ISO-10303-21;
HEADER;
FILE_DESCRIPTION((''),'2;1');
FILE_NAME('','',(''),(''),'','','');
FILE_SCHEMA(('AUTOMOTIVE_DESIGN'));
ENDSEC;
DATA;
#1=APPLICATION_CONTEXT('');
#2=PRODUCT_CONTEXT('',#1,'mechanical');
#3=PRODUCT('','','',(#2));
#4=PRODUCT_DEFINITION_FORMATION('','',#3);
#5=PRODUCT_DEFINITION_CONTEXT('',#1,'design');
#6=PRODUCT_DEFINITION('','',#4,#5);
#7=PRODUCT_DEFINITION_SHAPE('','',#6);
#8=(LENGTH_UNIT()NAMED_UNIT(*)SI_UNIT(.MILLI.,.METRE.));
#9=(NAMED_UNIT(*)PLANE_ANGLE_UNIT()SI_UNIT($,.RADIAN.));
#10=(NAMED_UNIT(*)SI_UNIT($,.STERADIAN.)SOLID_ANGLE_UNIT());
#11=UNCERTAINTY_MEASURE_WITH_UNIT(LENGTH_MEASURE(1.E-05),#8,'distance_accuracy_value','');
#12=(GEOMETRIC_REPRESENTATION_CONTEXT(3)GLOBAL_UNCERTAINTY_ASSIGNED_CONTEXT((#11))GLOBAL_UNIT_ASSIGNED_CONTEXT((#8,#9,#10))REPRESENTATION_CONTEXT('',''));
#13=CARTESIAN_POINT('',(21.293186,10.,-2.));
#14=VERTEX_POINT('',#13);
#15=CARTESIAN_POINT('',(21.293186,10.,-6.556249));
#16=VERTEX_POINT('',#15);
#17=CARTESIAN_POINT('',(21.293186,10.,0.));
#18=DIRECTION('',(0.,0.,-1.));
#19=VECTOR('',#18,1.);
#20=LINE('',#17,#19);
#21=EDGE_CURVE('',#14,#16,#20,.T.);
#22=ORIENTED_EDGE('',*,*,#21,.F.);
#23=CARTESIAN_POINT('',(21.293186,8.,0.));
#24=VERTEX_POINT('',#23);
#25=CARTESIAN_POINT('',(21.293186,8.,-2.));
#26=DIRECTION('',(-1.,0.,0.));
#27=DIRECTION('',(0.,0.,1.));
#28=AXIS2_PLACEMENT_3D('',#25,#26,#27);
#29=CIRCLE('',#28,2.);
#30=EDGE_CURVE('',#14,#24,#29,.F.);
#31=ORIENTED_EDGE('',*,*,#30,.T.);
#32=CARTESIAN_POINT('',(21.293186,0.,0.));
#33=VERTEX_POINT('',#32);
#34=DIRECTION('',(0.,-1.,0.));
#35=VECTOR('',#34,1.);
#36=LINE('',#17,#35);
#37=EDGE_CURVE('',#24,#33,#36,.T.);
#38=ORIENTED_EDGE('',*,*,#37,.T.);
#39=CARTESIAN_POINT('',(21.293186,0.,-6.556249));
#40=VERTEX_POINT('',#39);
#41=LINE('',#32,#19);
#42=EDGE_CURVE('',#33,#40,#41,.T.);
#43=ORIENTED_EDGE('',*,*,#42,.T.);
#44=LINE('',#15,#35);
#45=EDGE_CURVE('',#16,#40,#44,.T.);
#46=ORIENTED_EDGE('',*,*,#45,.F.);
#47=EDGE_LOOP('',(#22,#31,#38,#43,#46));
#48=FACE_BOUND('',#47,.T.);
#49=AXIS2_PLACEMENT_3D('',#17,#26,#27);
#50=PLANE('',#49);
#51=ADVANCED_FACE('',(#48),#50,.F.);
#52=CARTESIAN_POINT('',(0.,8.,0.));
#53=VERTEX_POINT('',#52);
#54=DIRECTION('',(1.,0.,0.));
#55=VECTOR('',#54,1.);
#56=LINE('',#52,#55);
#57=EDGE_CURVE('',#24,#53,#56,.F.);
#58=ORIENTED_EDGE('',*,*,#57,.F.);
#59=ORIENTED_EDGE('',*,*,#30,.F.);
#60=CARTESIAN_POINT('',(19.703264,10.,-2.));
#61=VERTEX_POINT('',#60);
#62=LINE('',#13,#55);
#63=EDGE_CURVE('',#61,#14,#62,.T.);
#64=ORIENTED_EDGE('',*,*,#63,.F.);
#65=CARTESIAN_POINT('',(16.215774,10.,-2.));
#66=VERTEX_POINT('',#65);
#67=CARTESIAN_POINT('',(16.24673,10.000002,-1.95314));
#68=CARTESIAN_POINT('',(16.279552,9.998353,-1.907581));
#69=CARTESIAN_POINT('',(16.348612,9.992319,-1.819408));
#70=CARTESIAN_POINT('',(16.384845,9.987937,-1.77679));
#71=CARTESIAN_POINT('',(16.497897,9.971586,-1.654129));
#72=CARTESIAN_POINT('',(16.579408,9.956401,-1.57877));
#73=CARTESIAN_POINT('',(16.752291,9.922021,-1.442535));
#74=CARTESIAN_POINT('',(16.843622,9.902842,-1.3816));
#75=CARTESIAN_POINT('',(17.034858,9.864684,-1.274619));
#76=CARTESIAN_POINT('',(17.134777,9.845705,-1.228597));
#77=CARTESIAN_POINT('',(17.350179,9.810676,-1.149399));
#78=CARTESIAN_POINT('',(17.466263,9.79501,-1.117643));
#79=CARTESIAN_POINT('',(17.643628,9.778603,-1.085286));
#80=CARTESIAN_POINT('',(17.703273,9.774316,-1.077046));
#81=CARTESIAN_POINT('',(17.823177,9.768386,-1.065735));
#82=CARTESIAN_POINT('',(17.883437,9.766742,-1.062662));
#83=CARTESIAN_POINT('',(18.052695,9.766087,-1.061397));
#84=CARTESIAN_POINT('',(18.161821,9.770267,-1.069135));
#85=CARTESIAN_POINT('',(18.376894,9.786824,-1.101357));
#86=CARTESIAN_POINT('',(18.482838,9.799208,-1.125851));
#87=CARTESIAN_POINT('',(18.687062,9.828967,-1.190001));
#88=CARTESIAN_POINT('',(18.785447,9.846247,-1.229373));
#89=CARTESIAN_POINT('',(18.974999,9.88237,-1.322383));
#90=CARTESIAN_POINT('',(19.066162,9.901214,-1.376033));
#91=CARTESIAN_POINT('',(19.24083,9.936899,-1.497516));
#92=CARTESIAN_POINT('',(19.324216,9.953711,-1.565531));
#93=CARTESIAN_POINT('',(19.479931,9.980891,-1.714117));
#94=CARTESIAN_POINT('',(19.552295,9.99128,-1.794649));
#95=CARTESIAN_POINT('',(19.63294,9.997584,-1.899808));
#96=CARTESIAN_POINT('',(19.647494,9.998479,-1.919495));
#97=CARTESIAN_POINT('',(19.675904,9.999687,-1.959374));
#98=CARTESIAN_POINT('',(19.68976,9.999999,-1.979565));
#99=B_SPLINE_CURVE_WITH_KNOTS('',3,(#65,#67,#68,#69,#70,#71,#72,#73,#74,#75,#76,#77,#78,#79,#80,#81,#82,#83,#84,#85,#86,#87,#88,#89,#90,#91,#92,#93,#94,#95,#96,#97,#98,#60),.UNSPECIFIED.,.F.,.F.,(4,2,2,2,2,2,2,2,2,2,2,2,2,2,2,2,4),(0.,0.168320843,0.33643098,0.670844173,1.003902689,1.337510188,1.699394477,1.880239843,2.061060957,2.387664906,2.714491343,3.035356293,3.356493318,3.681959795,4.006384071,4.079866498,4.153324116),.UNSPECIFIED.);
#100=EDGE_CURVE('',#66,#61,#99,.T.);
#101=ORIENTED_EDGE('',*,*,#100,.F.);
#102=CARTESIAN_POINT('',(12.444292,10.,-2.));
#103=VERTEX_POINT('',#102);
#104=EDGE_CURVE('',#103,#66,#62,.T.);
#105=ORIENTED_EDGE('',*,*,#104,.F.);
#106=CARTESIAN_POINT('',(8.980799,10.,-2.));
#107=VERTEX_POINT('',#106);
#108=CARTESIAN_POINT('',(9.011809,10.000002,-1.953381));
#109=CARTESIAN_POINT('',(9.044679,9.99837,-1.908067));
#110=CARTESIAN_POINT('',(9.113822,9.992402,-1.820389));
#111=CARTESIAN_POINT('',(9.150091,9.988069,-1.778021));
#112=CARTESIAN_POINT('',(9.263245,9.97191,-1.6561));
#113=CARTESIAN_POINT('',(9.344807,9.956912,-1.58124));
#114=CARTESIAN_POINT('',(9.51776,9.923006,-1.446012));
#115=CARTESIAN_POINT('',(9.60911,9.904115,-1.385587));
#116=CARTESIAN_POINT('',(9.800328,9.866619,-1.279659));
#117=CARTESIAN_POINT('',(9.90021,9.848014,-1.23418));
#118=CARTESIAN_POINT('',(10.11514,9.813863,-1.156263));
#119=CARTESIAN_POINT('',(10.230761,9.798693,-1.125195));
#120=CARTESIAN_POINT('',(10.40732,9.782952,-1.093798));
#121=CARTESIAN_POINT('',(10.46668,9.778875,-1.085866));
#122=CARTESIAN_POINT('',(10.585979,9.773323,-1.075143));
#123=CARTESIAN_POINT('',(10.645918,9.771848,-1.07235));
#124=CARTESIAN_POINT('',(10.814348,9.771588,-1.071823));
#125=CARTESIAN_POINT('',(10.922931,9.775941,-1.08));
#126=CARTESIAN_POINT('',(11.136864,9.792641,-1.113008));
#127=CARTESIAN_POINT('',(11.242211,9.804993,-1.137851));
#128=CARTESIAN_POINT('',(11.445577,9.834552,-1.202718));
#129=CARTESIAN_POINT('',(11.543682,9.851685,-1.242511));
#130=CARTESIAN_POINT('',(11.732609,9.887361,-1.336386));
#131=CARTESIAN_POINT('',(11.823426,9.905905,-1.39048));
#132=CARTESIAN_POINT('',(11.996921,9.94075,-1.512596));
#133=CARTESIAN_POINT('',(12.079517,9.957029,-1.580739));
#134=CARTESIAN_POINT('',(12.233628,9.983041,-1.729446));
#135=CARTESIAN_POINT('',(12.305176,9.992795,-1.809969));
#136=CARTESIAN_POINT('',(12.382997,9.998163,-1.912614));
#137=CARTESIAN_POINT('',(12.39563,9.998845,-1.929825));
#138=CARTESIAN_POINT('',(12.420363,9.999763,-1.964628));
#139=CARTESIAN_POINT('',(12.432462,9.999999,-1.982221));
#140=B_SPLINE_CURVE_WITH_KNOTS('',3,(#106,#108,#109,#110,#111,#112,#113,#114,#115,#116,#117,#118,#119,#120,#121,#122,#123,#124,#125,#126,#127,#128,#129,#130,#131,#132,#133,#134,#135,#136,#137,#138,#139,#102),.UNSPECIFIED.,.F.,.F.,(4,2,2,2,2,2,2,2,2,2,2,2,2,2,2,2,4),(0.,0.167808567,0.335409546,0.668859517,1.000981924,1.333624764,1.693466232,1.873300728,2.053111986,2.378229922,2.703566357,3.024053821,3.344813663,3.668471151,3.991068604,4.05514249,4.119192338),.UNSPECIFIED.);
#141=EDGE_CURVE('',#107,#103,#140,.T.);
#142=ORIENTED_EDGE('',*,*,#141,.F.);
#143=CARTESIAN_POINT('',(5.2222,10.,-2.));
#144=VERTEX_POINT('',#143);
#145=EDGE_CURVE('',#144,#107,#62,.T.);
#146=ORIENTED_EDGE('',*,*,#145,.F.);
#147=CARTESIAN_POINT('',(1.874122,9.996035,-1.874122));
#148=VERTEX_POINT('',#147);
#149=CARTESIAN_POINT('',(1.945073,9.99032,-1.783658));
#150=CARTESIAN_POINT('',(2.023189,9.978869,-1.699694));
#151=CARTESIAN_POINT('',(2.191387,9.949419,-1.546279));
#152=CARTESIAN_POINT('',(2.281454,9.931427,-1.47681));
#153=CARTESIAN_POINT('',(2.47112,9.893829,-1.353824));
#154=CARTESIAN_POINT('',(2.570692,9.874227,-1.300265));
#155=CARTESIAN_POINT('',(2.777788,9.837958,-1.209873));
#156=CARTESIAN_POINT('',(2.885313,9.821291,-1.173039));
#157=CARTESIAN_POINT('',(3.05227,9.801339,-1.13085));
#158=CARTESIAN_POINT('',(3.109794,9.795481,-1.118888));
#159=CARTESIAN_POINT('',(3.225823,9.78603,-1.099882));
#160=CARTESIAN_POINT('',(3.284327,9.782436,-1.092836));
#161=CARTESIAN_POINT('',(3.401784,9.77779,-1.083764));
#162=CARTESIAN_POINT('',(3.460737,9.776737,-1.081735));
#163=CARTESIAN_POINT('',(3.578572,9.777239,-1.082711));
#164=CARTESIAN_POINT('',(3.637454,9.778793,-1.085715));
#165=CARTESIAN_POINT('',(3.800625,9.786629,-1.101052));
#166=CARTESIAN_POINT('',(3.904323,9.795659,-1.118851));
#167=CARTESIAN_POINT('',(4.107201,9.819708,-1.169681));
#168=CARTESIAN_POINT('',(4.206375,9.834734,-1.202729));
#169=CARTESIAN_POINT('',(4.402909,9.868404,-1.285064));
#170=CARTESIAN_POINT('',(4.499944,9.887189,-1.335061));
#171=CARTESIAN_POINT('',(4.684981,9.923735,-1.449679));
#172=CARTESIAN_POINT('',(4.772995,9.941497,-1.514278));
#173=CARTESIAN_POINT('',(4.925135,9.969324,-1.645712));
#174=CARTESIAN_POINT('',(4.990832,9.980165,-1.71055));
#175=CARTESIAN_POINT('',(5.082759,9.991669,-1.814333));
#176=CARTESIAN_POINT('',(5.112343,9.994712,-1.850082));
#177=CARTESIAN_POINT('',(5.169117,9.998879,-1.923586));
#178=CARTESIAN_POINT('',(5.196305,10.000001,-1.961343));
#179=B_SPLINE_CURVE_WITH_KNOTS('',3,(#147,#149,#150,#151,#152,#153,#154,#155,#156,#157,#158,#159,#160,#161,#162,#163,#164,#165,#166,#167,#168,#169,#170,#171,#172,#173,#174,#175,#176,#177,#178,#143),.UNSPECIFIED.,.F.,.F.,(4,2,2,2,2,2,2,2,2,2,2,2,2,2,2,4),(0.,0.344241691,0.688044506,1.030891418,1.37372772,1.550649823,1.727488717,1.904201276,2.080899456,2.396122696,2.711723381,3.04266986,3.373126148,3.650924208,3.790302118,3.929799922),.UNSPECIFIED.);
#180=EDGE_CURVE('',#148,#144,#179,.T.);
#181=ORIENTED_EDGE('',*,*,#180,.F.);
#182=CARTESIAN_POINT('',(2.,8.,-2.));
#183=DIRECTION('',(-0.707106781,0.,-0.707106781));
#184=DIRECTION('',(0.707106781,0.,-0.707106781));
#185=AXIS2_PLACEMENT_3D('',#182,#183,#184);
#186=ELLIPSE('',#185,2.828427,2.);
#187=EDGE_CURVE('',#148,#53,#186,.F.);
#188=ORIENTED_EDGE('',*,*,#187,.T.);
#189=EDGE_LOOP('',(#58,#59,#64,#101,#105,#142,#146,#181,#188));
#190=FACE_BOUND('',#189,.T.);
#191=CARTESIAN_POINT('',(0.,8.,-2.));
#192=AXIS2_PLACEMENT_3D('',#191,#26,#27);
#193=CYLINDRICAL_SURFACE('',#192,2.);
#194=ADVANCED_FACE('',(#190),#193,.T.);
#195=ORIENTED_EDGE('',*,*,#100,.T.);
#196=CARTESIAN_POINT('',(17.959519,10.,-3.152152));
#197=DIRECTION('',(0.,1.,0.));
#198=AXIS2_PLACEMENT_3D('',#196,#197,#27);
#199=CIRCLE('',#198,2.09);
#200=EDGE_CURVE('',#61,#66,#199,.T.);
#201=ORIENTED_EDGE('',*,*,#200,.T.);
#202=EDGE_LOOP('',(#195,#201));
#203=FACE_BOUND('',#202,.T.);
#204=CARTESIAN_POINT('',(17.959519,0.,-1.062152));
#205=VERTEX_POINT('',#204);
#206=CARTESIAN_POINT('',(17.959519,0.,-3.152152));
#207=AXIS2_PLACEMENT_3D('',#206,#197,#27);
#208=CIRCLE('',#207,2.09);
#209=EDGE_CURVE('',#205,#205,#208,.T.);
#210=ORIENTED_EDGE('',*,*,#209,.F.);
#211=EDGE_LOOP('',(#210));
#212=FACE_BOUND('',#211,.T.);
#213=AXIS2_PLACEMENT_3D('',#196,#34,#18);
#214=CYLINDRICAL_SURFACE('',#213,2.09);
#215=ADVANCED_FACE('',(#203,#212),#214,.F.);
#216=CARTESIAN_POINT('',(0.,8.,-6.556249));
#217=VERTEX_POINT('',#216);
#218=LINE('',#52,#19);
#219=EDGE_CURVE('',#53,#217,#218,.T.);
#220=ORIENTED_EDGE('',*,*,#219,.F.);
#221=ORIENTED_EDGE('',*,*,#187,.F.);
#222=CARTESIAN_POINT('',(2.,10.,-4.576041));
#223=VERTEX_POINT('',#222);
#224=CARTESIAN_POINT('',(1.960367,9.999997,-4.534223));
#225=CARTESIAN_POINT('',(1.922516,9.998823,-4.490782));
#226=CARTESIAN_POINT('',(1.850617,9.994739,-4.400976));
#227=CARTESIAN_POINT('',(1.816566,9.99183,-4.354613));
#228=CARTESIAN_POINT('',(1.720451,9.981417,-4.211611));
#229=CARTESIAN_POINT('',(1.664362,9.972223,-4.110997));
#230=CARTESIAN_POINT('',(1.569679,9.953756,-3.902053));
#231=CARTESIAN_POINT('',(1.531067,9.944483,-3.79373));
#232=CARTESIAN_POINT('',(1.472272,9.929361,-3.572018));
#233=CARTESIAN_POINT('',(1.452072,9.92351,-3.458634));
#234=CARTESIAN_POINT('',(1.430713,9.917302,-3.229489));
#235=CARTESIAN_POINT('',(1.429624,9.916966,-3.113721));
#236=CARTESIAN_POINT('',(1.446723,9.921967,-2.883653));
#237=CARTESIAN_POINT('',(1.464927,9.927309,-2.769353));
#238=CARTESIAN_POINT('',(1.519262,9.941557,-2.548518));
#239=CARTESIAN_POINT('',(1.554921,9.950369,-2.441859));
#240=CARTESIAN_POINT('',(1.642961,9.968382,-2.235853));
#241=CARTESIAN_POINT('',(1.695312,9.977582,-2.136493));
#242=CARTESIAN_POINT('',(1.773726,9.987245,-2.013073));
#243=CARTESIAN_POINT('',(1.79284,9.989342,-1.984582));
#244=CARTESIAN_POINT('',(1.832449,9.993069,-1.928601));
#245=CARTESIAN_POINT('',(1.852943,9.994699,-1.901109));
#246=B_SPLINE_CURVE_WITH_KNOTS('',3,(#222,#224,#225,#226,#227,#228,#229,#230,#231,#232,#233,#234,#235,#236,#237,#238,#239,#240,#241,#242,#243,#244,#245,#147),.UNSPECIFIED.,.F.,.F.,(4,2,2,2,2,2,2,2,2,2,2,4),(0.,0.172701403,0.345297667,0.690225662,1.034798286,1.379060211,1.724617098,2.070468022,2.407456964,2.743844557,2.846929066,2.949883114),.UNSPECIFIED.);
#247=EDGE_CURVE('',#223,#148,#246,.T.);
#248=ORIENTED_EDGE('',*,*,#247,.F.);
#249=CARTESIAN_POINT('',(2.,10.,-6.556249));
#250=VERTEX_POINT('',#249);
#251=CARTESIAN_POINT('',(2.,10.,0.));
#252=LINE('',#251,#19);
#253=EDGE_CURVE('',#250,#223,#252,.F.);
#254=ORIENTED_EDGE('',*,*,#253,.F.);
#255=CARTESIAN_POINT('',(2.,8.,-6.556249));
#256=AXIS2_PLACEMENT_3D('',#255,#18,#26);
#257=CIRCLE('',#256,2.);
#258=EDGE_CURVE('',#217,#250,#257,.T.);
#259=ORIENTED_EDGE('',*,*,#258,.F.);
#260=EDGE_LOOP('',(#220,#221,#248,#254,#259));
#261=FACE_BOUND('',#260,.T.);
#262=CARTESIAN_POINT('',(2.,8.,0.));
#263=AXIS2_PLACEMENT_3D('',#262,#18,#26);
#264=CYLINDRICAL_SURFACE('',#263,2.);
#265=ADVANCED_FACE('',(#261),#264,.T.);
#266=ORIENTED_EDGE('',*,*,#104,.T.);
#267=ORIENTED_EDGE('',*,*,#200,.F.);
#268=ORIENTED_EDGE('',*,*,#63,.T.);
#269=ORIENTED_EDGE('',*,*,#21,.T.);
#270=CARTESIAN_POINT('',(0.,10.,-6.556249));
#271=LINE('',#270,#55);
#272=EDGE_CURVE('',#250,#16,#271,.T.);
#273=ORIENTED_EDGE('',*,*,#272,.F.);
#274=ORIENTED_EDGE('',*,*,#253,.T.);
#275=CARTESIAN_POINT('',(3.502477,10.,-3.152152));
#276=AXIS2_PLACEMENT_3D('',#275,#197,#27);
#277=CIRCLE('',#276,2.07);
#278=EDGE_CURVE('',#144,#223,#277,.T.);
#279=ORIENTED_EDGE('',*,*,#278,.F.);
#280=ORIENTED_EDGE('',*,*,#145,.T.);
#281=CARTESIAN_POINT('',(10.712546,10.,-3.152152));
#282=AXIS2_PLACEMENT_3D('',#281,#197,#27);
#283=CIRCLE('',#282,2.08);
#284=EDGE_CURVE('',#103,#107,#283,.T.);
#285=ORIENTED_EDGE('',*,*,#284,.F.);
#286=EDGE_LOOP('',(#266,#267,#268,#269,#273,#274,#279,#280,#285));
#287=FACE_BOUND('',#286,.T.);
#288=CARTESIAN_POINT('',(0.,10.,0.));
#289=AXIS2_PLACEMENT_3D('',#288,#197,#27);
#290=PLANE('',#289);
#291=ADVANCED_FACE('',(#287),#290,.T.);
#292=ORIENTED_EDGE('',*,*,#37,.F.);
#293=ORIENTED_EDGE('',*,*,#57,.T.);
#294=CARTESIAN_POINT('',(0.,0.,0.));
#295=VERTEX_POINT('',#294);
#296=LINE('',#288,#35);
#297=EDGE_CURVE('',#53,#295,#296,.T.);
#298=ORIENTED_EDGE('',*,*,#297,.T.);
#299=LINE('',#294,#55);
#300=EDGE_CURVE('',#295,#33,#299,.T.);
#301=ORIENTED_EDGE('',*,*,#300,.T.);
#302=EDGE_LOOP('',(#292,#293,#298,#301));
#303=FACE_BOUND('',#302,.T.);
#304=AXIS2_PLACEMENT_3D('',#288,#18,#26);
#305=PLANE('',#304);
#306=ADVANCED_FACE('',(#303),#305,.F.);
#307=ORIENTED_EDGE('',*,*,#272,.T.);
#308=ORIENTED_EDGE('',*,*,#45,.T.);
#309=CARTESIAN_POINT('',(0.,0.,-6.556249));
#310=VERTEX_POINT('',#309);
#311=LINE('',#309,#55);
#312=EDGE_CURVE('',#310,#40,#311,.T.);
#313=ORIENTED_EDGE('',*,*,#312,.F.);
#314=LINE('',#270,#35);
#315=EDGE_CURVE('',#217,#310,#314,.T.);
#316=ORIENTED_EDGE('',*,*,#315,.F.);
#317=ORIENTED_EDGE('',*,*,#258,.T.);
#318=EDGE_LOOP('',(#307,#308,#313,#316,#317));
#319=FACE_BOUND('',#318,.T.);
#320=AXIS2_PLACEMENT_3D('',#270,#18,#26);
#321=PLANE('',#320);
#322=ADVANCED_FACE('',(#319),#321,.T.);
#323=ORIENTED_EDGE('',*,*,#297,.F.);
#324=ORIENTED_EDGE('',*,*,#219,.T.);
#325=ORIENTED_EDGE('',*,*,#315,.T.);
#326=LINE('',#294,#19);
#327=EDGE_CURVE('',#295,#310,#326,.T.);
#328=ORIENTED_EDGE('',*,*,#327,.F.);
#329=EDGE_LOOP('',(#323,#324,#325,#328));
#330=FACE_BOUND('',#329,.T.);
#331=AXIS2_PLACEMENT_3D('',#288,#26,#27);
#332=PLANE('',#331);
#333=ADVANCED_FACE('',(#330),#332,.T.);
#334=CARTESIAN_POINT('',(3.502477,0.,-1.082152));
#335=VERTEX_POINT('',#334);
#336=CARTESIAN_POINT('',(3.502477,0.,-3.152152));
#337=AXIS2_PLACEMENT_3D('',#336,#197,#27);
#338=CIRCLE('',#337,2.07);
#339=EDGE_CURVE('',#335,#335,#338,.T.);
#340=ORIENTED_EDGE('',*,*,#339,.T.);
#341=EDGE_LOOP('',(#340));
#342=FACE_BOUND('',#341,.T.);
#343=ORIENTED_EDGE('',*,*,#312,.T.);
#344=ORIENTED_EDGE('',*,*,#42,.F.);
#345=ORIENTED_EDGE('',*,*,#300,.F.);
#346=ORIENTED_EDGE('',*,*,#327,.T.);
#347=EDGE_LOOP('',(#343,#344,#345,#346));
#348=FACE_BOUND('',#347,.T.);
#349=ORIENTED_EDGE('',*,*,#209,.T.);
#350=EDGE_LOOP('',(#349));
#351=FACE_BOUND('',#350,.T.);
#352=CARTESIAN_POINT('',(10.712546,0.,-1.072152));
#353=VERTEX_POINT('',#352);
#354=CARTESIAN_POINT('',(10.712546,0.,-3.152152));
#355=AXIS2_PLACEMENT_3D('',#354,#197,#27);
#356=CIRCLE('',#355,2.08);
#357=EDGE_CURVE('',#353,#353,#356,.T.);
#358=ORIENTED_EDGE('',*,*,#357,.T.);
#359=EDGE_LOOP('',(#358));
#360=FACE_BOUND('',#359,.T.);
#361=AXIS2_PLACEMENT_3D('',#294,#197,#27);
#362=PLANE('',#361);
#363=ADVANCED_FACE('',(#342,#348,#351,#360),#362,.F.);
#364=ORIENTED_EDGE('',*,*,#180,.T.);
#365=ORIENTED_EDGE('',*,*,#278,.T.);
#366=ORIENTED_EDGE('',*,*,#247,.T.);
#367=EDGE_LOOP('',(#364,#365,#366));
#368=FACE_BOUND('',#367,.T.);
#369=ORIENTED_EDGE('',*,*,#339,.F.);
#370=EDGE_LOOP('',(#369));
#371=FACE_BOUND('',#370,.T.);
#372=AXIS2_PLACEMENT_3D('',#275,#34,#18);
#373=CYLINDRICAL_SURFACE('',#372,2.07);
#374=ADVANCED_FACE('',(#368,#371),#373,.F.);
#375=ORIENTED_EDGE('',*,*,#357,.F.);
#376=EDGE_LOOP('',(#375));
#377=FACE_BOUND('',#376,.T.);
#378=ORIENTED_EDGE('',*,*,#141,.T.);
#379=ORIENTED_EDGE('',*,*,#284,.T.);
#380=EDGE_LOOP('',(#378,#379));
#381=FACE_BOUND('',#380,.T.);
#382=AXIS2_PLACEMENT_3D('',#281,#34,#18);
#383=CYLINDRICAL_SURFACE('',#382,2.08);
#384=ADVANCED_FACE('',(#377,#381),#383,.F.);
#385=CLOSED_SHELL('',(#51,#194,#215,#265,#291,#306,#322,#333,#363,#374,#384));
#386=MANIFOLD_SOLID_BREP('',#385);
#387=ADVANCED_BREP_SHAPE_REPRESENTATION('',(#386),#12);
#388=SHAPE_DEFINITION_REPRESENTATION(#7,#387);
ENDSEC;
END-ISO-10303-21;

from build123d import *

# Parameters (mm, degrees)
SKETCH1_W           = 21.293186277
SKETCH1_H           = 6.556248908
SKETCH1_R           = 2.09
SKETCH1_R_2         = 2.07
SKETCH1_R_3         = 2.08
BOSS_EXTRUDE1_DEPTH = 10
FILLET1_R           = 2


with BuildPart() as part:
    # Sketch1 → Boss-Extrude1 (new body)
    with BuildSketch(Plane(origin=(0, 0, 0), x_dir=(1, 0, 0), z_dir=(0, 1, 0))):
        with Locations((10.646593139, 3.278124454)):
            Rectangle(SKETCH1_W, SKETCH1_H)
        with Locations(Location((17.959518774, 3.152151811, 0), (0, 0, 270))):
            Circle(SKETCH1_R, mode=Mode.SUBTRACT)
        with Locations(Location((3.502477391, 3.152151811, 0), (0, 0, 270))):
            Circle(SKETCH1_R_2, mode=Mode.SUBTRACT)
        with Locations(Location((10.712545691, 3.152151811, 0), (0, 0, 270))):
            Circle(SKETCH1_R_3, mode=Mode.SUBTRACT)
    extrude(amount=BOSS_EXTRUDE1_DEPTH)

    # Fillet1
    # the kernel refuses this fillet: 2 mm, written as the material it takes off along each edge
    with BuildSketch(Plane(origin=(-5, 10, 0), x_dir=(0, -1, 0), z_dir=(1, 0, 0))) as fillet1_piece_1:
        with BuildLine():
            CenterArc((FILLET1_R, FILLET1_R), FILLET1_R, 180, 90)
            Line((0, FILLET1_R), (0, 0))
            Line((0, 0), (FILLET1_R, 0))
        make_face()
    extrude(amount=31.293186277, mode=Mode.SUBTRACT)
    with BuildSketch(Plane(origin=(0, 10, -11.556248908), x_dir=(0, -1, 0), z_dir=(0, 0, 1))) as fillet1_piece_2:
        with BuildLine():
            CenterArc((FILLET1_R, FILLET1_R), FILLET1_R, 180, 90)
            Line((0, FILLET1_R), (0, 0))
            Line((0, 0), (FILLET1_R, 0))
        make_face()
    extrude(amount=16.556248908, mode=Mode.SUBTRACT)


solid = part.part
